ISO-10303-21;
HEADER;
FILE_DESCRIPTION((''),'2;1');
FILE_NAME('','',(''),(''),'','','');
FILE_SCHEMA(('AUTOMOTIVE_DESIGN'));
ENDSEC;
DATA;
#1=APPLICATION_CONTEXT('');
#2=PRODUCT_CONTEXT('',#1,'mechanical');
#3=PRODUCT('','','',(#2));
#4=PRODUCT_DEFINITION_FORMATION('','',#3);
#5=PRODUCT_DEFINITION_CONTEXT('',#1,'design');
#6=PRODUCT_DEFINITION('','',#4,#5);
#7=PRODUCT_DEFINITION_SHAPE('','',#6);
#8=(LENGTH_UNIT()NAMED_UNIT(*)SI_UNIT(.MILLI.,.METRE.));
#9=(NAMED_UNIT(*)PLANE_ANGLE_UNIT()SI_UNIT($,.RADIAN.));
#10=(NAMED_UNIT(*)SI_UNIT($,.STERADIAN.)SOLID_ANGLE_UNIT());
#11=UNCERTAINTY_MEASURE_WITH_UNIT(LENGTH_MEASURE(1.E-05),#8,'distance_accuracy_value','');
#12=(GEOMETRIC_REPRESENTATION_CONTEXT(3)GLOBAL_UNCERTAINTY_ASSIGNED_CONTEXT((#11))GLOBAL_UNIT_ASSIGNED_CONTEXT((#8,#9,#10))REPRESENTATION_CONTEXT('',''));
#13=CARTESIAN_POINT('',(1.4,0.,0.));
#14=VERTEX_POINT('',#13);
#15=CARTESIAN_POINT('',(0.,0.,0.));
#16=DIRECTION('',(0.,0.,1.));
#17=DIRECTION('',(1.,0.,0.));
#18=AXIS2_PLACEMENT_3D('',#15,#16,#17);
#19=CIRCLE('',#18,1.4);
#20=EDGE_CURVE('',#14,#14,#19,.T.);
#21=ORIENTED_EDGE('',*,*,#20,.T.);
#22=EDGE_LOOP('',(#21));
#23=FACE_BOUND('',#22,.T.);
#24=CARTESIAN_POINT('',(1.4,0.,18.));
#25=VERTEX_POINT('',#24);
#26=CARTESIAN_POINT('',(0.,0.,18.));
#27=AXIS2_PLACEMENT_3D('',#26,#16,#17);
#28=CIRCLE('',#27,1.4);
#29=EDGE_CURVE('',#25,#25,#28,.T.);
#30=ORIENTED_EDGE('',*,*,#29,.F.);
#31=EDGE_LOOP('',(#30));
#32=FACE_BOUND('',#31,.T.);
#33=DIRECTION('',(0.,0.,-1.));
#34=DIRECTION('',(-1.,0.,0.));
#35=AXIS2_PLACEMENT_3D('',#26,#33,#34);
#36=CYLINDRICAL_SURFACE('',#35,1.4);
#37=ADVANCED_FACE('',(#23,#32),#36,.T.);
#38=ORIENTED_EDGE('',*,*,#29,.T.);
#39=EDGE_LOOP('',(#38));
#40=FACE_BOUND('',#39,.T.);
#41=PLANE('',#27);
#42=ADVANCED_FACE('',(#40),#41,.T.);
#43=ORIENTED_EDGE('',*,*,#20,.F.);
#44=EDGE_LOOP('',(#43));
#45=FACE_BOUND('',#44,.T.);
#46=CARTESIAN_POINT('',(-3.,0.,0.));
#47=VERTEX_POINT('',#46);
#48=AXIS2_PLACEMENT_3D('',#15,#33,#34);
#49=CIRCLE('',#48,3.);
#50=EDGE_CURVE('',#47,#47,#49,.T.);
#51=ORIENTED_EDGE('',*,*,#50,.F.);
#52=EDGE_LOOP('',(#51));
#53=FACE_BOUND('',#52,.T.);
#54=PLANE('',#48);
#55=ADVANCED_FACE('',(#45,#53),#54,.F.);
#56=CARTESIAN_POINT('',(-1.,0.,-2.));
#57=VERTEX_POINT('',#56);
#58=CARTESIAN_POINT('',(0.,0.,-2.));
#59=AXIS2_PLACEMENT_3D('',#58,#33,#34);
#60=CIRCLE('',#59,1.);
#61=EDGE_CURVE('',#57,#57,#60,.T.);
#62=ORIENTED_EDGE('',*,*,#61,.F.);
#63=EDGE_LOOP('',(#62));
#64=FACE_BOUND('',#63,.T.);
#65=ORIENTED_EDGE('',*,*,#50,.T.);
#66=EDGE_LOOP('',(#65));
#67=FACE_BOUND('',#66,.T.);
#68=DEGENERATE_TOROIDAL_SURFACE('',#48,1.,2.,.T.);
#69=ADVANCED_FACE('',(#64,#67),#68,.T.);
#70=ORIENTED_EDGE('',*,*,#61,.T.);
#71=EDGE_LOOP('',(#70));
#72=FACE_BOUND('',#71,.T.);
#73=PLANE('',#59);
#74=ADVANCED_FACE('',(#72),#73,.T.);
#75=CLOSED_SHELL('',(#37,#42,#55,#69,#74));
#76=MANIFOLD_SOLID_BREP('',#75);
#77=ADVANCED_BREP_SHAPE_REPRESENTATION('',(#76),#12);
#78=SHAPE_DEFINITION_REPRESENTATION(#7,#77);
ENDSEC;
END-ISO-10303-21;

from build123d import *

# Parameters (mm, degrees)
ESQUISSE1_R        = 1.4
BOSS_EXTRU_1_DEPTH = 18
ESQUISSE2_R        = 3
BOSS_EXTRU_2_DEPTH = 2
CONG_2_R           = 2


with BuildPart() as part:
    # Esquisse1 → Boss.-Extru.1 (new body)
    with BuildSketch(Plane.XY):
        Circle(ESQUISSE1_R)
    extrude(amount=BOSS_EXTRU_1_DEPTH)

    # Esquisse2 → Boss.-Extru.2 (add)
    with BuildSketch(Plane(origin=(0, 0, 0), x_dir=(-1, 0, 0), z_dir=(0, 0, -1))):
        Circle(ESQUISSE2_R)
    extrude(amount=BOSS_EXTRU_2_DEPTH)

    # Congé2
    cong_2_edges = [part.edges().sort_by_distance(p)[0] for p in [
        (3, 0, -2),
    ]]
    fillet(cong_2_edges, radius=CONG_2_R - 0.0001)  # a hair under: the kernel refuses the full size


solid = part.part
